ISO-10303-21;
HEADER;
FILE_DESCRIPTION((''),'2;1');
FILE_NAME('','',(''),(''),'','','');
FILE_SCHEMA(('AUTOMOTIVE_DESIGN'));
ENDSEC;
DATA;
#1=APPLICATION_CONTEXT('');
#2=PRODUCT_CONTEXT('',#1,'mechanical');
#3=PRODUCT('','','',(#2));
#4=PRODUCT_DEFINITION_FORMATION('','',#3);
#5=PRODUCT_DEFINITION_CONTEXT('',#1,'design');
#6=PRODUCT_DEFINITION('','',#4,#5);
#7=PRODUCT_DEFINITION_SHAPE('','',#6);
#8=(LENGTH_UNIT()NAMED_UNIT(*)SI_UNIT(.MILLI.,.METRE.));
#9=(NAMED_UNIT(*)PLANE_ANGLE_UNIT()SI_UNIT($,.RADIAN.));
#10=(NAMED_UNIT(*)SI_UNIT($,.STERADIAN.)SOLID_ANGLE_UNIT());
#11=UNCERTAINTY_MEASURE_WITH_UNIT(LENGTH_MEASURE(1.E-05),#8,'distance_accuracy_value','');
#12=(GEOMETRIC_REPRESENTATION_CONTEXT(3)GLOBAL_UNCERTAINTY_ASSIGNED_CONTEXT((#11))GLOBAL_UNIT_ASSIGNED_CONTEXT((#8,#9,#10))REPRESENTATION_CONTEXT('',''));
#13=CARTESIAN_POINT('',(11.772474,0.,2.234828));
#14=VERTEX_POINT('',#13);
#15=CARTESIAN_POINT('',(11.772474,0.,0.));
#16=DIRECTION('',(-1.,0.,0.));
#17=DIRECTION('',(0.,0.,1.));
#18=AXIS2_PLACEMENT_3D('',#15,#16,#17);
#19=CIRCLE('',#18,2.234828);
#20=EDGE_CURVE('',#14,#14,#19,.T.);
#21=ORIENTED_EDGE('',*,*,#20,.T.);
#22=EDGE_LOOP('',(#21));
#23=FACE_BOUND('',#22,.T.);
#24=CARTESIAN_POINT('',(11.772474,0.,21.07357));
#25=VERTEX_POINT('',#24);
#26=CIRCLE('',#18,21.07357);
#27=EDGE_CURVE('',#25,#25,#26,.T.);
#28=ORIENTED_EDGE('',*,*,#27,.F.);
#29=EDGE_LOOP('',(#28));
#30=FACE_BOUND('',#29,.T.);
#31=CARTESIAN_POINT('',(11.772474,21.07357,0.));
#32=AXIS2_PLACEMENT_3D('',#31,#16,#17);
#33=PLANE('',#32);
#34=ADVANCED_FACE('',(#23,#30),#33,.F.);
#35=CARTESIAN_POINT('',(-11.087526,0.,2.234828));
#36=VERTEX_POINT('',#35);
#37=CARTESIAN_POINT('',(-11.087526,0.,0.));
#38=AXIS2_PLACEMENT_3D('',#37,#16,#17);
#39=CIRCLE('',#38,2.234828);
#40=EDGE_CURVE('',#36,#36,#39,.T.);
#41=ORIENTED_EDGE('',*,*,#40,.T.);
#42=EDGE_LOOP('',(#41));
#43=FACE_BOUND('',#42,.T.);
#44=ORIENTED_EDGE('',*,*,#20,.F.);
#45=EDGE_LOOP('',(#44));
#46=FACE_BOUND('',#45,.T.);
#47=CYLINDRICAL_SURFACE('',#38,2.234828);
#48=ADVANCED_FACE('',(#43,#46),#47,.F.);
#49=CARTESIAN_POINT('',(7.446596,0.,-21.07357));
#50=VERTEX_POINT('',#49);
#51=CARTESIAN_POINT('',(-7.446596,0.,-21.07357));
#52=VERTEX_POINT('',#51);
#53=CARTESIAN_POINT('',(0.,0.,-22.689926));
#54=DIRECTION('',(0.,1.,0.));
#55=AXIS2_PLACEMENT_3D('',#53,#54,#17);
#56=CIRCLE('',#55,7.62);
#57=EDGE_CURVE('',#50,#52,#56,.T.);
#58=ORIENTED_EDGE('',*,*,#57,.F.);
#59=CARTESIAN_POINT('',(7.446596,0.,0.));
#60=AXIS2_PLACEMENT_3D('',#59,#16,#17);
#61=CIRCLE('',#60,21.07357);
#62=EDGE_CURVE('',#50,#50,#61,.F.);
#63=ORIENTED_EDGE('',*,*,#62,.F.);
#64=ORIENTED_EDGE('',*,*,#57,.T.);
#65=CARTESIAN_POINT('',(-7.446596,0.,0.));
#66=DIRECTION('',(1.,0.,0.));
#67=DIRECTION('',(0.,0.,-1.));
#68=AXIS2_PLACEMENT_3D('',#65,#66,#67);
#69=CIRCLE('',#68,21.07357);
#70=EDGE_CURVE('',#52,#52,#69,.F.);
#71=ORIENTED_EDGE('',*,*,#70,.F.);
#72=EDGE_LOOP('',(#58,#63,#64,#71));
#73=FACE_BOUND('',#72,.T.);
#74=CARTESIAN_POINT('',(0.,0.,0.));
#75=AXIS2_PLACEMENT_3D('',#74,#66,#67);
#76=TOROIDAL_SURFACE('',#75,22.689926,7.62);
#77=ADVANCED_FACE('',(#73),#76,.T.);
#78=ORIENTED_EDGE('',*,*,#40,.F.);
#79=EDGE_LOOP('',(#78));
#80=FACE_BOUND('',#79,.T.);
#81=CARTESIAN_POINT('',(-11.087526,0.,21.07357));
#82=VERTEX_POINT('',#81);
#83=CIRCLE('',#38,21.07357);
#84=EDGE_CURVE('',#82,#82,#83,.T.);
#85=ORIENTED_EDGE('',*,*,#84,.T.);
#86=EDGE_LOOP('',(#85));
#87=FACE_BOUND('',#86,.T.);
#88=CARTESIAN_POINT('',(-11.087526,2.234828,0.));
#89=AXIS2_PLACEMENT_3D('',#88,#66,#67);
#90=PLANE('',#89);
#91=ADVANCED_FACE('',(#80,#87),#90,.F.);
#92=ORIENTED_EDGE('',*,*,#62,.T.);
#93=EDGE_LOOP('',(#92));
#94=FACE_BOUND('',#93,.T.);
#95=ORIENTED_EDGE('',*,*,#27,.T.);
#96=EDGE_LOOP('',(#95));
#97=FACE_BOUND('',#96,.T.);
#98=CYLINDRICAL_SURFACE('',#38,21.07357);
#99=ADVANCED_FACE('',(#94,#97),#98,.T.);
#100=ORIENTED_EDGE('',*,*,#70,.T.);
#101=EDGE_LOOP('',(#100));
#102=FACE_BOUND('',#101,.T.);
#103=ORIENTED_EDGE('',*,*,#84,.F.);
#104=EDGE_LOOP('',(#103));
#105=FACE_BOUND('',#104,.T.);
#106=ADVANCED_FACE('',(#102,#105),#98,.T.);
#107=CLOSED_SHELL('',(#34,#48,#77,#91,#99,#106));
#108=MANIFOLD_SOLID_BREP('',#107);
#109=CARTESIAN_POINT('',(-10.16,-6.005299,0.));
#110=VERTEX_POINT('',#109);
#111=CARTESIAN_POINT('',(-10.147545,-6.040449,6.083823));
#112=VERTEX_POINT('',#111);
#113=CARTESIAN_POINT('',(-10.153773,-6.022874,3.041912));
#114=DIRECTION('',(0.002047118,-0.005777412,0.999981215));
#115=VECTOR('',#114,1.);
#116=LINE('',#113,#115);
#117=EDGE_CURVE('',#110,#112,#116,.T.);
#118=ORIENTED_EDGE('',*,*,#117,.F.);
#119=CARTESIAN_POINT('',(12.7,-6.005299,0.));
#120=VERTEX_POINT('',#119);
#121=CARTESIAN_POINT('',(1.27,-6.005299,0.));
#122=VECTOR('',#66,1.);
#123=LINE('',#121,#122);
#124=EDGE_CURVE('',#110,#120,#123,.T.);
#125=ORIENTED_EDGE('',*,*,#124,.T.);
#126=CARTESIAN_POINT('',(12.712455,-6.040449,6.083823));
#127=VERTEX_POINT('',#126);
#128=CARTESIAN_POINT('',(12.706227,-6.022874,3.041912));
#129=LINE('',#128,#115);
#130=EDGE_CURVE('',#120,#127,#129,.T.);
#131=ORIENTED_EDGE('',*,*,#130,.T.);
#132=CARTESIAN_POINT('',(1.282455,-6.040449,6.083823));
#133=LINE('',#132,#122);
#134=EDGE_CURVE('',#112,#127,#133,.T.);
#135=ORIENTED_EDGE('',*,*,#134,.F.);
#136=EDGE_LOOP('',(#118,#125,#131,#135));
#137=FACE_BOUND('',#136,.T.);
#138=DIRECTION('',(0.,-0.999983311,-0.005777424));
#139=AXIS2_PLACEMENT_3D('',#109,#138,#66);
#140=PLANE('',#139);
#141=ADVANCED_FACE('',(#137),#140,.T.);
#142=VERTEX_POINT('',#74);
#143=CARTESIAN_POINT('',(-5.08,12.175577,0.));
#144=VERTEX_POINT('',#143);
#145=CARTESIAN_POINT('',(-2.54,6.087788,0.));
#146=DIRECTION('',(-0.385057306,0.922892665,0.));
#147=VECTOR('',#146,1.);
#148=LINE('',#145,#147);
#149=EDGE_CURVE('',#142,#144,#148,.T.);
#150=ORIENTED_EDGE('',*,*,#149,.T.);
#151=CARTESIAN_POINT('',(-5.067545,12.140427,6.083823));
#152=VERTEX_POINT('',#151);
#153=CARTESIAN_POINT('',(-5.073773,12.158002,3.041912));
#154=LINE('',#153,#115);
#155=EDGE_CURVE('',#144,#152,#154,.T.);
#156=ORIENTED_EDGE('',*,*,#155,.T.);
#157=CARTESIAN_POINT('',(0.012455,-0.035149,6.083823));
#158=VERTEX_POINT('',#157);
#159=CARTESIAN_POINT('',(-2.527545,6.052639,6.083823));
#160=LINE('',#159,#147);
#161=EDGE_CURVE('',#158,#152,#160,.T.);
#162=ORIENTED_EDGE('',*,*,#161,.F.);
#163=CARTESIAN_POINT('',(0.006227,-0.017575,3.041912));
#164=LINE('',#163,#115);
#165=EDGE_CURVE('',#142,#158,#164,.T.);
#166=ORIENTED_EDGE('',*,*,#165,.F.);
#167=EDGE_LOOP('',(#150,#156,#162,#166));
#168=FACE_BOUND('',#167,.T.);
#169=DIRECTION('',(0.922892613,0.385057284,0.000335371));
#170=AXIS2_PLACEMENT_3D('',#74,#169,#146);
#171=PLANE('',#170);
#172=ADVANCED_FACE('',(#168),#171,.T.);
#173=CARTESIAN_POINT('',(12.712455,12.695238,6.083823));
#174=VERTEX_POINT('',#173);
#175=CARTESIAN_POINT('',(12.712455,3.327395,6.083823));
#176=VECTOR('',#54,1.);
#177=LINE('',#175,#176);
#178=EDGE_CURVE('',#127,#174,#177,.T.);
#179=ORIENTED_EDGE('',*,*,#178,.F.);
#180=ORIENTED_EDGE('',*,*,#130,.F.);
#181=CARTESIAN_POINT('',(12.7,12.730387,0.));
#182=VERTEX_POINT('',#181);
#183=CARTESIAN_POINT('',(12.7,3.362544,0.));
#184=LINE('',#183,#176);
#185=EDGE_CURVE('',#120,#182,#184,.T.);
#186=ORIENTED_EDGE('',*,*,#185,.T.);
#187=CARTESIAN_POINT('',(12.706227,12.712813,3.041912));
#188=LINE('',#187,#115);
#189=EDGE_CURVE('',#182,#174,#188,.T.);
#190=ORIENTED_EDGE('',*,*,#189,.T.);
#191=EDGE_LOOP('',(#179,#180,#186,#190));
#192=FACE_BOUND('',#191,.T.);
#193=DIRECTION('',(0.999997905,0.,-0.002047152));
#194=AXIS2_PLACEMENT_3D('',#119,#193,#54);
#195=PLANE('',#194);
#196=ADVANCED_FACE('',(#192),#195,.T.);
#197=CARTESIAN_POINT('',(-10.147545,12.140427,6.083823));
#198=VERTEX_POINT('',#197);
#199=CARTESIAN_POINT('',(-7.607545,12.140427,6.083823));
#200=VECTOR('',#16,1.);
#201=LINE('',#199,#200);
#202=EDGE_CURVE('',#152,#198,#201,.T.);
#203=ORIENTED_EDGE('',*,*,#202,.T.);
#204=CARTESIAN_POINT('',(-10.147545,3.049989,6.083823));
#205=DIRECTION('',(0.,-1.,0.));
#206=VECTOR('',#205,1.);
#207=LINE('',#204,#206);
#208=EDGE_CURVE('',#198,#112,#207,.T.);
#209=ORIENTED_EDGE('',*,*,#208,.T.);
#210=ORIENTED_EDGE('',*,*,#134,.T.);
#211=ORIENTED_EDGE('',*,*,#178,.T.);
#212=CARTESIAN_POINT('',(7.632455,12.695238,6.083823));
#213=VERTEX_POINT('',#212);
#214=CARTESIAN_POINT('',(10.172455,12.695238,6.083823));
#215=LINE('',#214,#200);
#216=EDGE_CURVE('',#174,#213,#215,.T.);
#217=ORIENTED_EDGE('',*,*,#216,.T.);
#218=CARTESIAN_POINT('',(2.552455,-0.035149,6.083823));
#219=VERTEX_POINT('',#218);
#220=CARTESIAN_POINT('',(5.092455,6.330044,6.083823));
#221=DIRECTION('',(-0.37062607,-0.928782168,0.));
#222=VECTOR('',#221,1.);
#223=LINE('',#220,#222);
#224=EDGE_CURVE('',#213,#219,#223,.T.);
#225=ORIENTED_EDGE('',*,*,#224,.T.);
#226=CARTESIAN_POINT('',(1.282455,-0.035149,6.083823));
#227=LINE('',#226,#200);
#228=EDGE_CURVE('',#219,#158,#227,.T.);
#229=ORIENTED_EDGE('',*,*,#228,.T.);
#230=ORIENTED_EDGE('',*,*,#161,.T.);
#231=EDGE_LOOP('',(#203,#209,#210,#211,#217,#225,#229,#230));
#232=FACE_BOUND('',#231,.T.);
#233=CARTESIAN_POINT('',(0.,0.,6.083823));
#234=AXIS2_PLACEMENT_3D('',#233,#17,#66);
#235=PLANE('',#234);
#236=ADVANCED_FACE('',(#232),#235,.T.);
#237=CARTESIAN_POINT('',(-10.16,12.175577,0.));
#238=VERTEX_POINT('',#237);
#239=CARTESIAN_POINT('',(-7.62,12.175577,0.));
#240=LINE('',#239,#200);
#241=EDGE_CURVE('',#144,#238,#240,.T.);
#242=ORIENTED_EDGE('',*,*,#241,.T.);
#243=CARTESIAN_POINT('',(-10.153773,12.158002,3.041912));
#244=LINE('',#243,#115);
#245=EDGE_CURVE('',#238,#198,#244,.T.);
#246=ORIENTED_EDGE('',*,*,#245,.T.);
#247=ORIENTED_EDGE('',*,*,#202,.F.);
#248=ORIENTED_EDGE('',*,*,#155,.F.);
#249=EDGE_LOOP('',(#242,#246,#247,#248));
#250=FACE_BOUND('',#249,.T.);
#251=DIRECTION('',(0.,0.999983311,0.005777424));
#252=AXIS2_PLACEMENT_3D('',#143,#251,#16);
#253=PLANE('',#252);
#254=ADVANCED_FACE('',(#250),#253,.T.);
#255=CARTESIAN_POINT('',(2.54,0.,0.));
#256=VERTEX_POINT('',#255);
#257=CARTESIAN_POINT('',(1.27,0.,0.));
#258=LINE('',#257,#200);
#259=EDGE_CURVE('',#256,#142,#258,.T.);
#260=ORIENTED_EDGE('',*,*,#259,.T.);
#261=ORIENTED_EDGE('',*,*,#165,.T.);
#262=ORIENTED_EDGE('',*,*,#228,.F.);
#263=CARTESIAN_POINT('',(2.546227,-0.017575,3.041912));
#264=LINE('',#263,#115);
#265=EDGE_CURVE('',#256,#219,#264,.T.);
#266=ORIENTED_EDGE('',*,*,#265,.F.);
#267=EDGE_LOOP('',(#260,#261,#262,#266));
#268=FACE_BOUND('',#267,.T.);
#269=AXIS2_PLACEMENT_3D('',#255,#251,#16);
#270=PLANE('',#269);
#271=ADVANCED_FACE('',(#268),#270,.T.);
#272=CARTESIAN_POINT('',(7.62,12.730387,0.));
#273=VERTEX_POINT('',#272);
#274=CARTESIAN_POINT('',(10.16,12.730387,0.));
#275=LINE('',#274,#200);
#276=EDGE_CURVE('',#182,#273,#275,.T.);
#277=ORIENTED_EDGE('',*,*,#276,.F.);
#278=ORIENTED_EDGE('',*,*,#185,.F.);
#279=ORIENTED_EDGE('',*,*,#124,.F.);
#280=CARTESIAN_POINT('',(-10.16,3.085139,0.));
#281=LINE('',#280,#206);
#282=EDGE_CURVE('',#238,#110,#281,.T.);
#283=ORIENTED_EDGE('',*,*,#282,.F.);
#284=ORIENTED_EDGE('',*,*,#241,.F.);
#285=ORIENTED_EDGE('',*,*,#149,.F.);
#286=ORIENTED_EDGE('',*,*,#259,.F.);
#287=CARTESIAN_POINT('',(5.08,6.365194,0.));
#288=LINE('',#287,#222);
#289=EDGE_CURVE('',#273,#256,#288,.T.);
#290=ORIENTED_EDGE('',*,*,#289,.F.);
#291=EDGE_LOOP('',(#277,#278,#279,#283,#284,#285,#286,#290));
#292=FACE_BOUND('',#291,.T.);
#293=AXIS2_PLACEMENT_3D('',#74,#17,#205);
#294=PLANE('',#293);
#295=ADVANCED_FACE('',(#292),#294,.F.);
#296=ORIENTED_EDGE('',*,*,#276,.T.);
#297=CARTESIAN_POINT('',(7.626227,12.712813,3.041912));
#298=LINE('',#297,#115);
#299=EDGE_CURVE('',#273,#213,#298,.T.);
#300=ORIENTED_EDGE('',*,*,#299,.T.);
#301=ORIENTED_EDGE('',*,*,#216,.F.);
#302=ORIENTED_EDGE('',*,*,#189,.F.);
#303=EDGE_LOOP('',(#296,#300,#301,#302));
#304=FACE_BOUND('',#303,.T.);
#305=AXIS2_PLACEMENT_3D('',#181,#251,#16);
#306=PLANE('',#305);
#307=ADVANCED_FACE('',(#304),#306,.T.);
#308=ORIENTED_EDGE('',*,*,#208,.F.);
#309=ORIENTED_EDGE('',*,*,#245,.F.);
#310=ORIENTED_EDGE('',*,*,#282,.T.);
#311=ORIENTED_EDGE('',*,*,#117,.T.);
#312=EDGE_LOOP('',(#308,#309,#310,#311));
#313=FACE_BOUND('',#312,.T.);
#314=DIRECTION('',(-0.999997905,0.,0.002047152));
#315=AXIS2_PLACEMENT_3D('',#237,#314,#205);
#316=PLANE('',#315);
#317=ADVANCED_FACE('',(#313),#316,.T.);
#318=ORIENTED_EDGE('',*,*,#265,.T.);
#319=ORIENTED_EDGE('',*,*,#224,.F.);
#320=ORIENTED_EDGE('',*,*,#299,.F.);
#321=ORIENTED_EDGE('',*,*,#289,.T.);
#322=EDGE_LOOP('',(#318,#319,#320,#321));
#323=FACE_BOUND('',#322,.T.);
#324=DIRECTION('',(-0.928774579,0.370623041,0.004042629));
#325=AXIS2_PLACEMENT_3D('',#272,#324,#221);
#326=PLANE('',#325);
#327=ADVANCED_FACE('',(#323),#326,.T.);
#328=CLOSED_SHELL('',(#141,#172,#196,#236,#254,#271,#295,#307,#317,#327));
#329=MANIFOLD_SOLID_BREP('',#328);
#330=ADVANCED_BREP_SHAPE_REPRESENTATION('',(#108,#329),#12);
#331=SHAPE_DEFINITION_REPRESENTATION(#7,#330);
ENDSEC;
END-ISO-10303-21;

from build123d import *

# Parameters (mm, degrees)
SWEEP2_PROFILE_R = 7.62


with BuildPart() as part:
    # Boundary3: read off the stored shape, not the designer's step
    # Boundary3: loft between two sections, ruled curve by curve
    boundary3_from = [
        Edge.make_line((-10.16, 12.175576631, 0), (-10.16, -6.00529912, 0)),
        Edge.make_line((-10.16, -6.00529912, 0), (12.7, -6.00529912, 0)),
        Edge.make_line((12.7, -6.00529912, 0), (12.7, 12.73038731, 0)),
        Edge.make_line((12.7, 12.73038731, 0), (7.62, 12.73038731, 0)),
        Edge.make_line((7.62, 12.73038731, 0), (2.54, 0, 0)),
        Edge.make_line((2.54, 0, 0), (0, 0, 0)),
        Edge.make_line((0, 0, 0), (-5.08, 12.175576631, 0)),
        Edge.make_line((-5.08, 12.175576631, 0), (-10.16, 12.175576631, 0)),
    ]
    boundary3_to = [
        Edge.make_line((-10.147545464, 12.140427218, 6.083823129), (-10.147545464, -6.040448532, 6.083823129)),
        Edge.make_line((-10.147545464, -6.040448532, 6.083823129), (12.712454536, -6.040448532, 6.083823129)),
        Edge.make_line((12.712454536, -6.040448532, 6.083823129), (12.712454536, 12.695237898, 6.083823129)),
        Edge.make_line((12.712454536, 12.695237898, 6.083823129), (7.632454536, 12.695237898, 6.083823129)),
        Edge.make_line((7.632454536, 12.695237898, 6.083823129), (2.552454536, -0.035149412, 6.083823129)),
        Edge.make_line((2.552454536, -0.035149412, 6.083823129), (0.012454536, -0.035149412, 6.083823129)),
        Edge.make_line((0.012454536, -0.035149412, 6.083823129), (-5.067545464, 12.140427218, 6.083823129)),
        Edge.make_line((-5.067545464, 12.140427218, 6.083823129), (-10.147545464, 12.140427218, 6.083823129)),
    ]
    boundary3 = Solid(Shell([*[Face.make_surface_from_curves(boundary3_from[k], boundary3_to[k]) for k in range(8)], Face(Wire(boundary3_from)), Face(Wire(boundary3_to))]))
    add(boundary3)


with BuildPart() as body_2:
    # Sketch2 → Revolve2 (revolve)
    with BuildSketch(Plane.XY, mode=Mode.PRIVATE) as revolve2_sk:
        Polygon((-11.087525715, 21.073570044), (-6.007525715, 21.073570044), (-0.927525715, 15.273308854), (1.612474285, 15.273308854), (6.692474285, 21.073570044), (11.772474285, 21.073570044), (11.772474285, 2.234828231), (-11.087525715, 2.234828231), align=None)
    revolve(revolve2_sk.sketch.rotate(Axis((-11.087525715, 0, 0), (1, 0, 0)), 90), axis=Axis((-11.087525715, 0, 0), (1, 0, 0)))

    # Sweep2: sweep along a path in Sketch3
    with BuildLine(Plane(origin=(0, 0, 0), x_dir=(0, 0, -1), z_dir=(1, 0, 0))) as sweep2_path:
        CenterArc((0, 0), 22.689926061, 0, 360)
    # Sweep2 profile (on start of the path) → Sweep2 (sweep)
    with BuildSketch(Plane(origin=(0, 0, -22.689926061), x_dir=(0, 0, 1), z_dir=(0, 1, 0))):
        Circle(SWEEP2_PROFILE_R)
    sweep(path=sweep2_path.line)


solid = Compound([part.part, body_2.part])
